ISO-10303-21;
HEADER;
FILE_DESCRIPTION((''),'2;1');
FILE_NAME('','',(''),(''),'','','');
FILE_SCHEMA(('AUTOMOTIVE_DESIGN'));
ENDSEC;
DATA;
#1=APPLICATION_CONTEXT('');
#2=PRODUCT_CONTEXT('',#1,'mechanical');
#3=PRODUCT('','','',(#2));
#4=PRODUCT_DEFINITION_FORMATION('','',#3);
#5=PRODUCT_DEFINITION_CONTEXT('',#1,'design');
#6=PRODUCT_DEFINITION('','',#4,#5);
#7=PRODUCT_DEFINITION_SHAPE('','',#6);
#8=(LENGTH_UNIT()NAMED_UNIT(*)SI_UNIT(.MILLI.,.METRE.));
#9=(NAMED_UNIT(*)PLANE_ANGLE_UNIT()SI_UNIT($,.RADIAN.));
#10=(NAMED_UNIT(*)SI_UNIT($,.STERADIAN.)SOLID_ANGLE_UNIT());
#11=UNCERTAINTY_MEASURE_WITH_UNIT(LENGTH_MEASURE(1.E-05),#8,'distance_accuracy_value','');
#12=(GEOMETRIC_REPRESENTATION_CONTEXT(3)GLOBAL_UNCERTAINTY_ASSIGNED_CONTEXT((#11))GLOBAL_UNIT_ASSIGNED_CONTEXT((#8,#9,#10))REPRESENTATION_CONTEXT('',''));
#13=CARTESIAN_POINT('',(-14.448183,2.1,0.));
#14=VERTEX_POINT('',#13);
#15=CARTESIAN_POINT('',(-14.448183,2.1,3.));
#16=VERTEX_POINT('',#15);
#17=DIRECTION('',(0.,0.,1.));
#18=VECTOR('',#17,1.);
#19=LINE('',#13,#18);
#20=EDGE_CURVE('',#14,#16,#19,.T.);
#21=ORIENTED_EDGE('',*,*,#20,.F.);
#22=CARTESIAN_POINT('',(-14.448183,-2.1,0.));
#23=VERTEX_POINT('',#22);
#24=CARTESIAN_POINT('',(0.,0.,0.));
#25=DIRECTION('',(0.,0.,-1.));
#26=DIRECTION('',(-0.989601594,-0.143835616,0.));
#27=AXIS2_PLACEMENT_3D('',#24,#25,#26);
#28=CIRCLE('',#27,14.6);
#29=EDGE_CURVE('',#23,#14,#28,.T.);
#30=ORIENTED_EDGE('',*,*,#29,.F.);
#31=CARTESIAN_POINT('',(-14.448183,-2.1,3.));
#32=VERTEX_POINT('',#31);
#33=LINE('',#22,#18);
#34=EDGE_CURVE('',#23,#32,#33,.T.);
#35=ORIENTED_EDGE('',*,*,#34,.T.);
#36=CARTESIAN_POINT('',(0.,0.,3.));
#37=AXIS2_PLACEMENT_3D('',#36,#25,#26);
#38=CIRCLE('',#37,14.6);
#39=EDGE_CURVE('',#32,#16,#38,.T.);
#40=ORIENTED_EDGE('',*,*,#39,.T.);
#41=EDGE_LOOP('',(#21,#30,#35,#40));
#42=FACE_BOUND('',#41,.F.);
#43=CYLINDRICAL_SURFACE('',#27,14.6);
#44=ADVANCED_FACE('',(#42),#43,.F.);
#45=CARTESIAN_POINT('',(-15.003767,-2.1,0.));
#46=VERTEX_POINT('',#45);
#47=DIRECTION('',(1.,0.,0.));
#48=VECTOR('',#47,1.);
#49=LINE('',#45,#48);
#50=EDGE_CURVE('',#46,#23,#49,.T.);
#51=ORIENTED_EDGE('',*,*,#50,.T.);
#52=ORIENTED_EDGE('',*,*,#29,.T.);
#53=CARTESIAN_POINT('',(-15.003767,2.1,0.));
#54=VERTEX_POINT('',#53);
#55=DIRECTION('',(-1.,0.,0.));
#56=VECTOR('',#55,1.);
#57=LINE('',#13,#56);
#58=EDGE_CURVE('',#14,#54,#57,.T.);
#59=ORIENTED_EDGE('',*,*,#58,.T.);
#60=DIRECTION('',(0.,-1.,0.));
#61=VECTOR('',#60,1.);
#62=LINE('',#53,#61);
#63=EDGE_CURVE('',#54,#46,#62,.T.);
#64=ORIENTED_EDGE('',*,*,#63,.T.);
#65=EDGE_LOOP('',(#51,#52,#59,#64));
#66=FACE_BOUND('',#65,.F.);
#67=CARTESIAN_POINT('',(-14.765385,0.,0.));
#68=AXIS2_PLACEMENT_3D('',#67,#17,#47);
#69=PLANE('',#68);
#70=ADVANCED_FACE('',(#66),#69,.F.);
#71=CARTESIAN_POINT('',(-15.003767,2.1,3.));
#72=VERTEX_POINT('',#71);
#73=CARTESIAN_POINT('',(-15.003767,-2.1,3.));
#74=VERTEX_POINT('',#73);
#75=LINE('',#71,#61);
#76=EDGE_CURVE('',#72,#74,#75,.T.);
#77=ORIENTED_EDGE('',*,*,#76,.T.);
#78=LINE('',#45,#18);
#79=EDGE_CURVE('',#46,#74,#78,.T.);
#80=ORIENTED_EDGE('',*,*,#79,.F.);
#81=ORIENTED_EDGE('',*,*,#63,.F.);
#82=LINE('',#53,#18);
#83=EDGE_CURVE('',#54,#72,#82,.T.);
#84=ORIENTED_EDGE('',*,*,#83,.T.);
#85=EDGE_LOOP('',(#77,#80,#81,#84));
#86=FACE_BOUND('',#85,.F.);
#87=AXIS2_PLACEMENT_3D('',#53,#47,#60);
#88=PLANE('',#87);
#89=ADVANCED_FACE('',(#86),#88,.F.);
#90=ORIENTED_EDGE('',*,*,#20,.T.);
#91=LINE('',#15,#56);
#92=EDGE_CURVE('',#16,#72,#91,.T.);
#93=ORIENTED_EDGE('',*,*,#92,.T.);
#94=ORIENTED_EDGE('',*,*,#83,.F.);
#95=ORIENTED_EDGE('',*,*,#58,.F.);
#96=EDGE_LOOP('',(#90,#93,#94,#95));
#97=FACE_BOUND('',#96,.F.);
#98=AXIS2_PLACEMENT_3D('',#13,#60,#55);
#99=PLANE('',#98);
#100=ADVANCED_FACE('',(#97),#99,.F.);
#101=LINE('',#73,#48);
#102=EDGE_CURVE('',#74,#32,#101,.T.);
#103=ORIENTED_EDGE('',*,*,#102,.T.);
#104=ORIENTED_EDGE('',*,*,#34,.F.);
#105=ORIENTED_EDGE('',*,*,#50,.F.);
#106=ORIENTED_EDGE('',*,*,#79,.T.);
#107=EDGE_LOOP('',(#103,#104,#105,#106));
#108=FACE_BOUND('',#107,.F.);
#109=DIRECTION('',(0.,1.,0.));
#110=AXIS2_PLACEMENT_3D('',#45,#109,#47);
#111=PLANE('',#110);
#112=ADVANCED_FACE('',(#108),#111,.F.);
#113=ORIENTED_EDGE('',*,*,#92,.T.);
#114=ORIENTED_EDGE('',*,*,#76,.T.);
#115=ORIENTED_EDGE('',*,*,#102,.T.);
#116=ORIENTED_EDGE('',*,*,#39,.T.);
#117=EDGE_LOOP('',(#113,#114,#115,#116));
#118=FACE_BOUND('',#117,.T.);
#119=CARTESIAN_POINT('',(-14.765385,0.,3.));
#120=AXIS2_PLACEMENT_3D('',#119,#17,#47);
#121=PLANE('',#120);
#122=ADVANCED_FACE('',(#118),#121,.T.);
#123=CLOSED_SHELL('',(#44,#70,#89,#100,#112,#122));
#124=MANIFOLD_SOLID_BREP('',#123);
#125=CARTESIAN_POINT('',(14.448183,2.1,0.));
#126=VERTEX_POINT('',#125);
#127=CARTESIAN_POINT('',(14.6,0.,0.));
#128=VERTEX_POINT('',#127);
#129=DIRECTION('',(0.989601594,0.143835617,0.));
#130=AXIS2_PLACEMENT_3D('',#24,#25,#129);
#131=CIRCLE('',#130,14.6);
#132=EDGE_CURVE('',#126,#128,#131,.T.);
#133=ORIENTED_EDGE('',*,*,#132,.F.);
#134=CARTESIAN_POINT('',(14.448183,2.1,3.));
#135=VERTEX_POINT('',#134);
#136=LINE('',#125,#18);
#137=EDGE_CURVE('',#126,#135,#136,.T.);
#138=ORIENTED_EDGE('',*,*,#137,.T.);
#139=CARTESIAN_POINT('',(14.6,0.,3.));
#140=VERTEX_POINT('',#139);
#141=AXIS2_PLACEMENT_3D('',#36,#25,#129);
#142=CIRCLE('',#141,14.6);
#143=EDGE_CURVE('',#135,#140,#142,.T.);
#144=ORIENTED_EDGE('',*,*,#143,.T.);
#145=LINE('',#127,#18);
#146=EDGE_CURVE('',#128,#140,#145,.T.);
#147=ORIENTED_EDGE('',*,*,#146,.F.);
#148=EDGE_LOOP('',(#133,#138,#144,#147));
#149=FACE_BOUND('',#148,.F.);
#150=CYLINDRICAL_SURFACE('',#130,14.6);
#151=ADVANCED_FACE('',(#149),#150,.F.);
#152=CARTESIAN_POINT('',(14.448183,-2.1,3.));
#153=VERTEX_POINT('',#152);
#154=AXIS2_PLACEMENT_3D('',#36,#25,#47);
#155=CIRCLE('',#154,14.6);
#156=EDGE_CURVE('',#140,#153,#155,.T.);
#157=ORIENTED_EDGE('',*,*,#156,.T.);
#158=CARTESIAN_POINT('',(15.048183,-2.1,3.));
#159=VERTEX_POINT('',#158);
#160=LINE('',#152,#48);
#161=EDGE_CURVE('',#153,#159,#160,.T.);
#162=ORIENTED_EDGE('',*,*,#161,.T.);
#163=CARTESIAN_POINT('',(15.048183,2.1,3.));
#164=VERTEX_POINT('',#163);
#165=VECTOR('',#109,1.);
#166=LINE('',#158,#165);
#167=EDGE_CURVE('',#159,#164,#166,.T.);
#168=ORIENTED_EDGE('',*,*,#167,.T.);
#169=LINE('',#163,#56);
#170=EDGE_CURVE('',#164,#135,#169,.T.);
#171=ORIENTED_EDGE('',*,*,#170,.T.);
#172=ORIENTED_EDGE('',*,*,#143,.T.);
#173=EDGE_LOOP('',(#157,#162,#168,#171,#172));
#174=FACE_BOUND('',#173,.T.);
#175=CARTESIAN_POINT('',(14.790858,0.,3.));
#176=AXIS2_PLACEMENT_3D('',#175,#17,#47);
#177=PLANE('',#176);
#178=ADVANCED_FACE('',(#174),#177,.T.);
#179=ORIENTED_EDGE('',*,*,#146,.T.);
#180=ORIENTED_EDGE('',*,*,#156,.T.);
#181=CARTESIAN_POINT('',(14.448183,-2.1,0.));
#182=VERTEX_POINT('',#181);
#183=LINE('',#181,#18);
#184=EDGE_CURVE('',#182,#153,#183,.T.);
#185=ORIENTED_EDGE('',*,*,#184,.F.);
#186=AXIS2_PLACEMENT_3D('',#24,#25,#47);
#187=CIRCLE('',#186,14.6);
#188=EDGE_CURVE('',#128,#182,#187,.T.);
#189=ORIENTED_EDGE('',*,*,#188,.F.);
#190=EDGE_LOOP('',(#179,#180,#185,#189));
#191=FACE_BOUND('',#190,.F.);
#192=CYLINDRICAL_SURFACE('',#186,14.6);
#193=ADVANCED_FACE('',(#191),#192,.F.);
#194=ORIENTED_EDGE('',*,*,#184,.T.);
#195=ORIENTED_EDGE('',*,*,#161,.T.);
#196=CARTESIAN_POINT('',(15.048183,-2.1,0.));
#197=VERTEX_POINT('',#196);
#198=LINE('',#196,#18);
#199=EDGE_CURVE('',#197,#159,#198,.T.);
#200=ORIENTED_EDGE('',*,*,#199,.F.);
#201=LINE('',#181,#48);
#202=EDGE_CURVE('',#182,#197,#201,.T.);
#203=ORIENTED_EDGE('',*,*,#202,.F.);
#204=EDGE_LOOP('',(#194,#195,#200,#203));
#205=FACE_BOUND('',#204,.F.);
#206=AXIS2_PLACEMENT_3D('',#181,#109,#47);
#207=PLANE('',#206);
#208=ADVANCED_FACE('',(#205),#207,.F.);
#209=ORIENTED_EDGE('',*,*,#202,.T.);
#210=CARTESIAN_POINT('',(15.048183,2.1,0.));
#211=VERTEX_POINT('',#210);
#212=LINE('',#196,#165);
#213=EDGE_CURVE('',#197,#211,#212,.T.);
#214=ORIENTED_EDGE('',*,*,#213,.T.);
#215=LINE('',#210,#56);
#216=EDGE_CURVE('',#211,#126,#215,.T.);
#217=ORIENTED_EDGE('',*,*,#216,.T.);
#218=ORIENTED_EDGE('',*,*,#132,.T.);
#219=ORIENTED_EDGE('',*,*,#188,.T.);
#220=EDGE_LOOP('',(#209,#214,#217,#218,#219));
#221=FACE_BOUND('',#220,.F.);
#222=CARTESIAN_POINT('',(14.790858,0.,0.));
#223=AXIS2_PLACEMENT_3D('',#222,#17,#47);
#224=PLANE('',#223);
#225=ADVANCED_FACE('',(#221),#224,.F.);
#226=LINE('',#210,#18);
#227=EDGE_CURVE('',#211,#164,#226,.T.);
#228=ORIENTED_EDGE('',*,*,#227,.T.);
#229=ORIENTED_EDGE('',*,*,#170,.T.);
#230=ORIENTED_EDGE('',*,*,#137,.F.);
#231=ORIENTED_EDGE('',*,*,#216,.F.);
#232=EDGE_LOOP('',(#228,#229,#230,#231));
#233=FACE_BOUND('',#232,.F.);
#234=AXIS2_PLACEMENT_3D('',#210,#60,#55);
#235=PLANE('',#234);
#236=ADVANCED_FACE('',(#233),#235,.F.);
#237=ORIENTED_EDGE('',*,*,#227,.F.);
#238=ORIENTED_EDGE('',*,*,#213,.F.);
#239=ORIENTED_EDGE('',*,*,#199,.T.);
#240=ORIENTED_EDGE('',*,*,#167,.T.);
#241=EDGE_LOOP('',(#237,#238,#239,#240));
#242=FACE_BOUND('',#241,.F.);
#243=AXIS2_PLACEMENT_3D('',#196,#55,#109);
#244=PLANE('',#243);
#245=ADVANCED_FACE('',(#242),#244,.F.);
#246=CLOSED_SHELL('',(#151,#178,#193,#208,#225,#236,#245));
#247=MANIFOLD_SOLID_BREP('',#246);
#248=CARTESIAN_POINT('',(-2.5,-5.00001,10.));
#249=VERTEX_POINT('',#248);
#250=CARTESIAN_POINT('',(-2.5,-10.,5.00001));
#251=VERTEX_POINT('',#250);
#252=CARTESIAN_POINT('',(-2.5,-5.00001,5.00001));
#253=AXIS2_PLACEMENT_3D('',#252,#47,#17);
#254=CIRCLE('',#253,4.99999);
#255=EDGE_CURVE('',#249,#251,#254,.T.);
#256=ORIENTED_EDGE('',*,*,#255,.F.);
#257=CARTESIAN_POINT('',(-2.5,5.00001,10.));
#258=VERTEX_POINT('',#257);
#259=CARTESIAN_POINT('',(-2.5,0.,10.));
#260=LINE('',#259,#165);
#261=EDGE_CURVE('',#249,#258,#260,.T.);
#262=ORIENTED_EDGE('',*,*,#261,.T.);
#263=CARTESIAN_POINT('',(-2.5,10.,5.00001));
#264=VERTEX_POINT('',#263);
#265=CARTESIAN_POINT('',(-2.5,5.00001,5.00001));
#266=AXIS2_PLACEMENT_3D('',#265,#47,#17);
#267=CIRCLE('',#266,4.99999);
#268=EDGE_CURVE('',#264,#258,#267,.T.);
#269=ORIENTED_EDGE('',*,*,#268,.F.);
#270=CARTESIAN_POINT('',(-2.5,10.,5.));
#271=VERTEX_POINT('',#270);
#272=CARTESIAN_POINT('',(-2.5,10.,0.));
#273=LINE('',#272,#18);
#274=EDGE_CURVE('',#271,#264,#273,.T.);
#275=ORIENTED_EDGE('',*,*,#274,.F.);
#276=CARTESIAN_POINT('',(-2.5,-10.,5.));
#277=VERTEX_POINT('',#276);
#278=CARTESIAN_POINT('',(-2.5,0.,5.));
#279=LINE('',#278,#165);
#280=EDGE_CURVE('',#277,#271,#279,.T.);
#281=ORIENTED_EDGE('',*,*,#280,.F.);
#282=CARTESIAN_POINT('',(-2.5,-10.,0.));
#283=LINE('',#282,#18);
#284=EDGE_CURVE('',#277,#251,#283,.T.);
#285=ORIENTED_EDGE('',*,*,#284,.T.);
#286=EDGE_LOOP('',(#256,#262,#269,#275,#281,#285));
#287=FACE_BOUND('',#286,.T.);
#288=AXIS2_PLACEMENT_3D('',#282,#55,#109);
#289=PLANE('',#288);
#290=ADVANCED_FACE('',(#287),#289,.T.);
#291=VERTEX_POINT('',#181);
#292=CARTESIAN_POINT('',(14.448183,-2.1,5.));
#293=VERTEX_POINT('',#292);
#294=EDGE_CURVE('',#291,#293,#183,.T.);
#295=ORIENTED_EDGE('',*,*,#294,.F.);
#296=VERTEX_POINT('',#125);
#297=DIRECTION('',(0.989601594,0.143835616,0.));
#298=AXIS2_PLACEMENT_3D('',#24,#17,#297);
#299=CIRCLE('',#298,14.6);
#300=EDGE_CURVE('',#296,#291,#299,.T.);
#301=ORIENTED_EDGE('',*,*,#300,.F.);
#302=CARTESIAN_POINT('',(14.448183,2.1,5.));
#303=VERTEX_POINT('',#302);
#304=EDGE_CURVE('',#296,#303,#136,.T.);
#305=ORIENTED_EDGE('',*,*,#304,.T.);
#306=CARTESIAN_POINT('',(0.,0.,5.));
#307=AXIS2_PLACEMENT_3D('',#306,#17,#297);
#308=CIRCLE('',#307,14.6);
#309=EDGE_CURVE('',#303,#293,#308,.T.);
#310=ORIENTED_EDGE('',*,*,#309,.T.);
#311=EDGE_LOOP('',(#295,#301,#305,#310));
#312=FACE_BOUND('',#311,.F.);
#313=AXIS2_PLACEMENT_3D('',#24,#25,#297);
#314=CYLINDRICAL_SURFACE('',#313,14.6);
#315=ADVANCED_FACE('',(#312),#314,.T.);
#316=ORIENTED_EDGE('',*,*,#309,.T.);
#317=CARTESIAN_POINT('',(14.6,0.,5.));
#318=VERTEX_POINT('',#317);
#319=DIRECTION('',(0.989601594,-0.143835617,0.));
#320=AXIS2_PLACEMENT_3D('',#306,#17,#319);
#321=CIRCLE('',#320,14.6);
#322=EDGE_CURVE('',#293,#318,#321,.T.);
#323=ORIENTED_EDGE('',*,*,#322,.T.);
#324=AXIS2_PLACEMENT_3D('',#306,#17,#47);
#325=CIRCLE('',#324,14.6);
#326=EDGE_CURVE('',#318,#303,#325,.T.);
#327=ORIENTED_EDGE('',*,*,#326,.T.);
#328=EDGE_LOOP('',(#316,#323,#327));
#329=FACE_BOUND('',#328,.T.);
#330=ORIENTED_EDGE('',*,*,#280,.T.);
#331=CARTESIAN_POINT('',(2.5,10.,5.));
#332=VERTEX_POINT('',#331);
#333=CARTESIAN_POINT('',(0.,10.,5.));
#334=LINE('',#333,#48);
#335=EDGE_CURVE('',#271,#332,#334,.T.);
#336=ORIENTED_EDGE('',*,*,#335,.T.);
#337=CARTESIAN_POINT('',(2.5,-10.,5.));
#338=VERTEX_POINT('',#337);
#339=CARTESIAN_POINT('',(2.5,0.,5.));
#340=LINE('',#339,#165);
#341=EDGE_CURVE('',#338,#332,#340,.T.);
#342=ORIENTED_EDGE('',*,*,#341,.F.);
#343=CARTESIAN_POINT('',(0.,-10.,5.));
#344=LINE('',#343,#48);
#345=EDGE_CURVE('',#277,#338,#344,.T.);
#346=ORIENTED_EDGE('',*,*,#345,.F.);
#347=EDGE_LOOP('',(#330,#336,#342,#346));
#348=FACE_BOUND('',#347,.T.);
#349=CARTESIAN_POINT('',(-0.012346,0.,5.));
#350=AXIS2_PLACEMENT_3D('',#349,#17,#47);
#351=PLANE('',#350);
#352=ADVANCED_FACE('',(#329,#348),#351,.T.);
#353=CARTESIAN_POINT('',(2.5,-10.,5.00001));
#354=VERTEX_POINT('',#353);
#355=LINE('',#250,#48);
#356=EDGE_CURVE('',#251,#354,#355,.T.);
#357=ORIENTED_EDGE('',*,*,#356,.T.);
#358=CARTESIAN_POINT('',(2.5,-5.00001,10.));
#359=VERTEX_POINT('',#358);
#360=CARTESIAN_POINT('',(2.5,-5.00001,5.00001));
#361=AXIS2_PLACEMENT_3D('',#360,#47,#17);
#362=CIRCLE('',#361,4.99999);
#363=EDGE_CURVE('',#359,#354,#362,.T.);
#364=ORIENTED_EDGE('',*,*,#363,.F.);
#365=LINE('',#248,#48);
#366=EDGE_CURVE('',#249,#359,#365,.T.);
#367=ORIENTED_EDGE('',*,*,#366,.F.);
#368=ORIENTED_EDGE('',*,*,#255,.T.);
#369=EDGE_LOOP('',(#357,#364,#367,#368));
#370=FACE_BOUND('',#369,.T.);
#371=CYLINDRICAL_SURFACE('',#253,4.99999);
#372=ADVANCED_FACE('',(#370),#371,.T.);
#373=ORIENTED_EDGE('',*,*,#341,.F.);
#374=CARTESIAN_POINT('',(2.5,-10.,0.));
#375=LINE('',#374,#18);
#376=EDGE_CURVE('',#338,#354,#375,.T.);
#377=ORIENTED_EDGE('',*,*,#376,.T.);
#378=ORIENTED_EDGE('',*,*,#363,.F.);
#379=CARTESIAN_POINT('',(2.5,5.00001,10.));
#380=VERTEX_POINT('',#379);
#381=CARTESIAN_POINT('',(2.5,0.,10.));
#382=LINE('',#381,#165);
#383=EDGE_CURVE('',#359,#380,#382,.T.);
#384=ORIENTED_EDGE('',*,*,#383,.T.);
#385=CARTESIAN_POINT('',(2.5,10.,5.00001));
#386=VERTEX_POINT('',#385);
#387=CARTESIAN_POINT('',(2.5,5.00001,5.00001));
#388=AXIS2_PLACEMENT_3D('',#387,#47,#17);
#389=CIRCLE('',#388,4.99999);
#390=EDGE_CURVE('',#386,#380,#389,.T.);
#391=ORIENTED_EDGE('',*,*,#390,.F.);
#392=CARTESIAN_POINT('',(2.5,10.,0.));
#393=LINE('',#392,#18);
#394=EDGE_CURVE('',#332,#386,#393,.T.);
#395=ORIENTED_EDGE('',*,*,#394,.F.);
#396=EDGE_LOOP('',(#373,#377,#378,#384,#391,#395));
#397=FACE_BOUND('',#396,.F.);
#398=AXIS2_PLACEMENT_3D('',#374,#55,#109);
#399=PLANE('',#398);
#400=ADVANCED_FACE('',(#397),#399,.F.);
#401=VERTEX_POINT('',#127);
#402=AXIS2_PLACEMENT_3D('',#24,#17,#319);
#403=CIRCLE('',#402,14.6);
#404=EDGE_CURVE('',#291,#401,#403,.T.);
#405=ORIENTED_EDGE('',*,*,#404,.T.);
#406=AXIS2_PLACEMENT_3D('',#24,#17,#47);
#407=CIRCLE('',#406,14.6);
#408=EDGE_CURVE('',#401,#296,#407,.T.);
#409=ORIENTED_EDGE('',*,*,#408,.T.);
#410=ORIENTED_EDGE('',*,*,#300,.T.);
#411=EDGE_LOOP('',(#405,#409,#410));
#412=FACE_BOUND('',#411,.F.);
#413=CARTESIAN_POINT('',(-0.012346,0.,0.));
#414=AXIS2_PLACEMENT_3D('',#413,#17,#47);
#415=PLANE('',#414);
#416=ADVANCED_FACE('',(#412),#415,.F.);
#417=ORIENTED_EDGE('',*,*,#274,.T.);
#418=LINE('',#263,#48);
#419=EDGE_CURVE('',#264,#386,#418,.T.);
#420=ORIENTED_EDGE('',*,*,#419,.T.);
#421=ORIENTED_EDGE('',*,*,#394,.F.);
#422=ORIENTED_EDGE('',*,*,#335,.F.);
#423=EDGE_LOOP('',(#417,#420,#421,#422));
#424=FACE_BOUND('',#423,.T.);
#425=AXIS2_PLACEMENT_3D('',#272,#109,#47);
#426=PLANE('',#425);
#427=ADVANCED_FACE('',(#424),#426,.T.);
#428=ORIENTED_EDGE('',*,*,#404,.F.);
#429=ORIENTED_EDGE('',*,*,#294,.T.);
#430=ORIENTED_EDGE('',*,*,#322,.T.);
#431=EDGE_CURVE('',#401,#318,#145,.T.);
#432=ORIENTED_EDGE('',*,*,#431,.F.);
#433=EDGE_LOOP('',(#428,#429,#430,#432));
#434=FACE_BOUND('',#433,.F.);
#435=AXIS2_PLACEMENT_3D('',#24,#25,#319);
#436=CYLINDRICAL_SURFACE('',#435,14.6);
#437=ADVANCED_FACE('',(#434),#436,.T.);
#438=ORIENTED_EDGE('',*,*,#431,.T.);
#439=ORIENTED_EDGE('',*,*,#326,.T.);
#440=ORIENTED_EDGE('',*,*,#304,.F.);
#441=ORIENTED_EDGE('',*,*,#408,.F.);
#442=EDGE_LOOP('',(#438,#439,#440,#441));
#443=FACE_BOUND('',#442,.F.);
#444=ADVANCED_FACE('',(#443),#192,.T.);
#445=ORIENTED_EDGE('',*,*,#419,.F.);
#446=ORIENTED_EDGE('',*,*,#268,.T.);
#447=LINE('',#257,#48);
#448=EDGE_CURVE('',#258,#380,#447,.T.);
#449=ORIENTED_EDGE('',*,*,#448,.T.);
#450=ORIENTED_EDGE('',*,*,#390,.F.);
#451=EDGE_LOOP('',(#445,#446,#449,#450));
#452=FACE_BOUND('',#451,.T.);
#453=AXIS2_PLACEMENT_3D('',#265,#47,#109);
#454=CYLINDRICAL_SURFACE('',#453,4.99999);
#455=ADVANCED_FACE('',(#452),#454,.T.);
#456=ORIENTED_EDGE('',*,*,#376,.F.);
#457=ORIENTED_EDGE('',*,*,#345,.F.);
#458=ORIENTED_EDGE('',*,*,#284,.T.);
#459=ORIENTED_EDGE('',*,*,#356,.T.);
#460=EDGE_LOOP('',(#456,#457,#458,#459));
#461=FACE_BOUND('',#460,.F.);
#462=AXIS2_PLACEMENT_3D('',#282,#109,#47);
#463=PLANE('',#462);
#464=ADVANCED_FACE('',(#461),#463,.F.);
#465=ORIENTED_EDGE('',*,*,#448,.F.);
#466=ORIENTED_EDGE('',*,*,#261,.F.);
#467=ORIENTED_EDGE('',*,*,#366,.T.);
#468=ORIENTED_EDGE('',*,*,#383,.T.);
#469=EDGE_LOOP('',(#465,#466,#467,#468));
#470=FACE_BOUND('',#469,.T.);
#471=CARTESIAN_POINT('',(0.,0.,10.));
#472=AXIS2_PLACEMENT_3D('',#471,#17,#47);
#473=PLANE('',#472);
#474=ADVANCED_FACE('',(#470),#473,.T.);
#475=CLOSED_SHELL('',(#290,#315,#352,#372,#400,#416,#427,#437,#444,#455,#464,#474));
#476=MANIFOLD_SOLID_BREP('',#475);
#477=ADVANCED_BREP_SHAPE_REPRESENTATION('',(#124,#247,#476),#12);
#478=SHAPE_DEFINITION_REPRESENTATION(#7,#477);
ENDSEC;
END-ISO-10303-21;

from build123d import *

# Parameters (mm, degrees)
F0_W     = 5
F0_H     = 20
F1_DEPTH = 5
F2_DEPTH = 3
F3_DEPTH = 10
F4_R     = 4.99999


# Not quite as in the source:
# - a fillet or chamfer is up to 0.001 mm smaller than in the source, because OpenCascade refuses the exact size


with BuildPart() as f1:
    # F0 (on Top) → F1 (new body)
    with BuildSketch(Plane.XY):
        with BuildLine():
            Line((14.4481832768, -2.1), (14.4481832768, 2.1))
            ThreePointArc((14.4481832768, 2.1), (0, 14.6), (-14.4481832768, 2.1))
            Line((-14.4481832768, 2.1), (-14.4037672862, 2.1))
            Line((-14.4037672862, 2.1), (-14.4037672862, -2.1))
            Line((-14.4037672862, -2.1), (-14.4481832768, -2.1))
            ThreePointArc((-14.4481832768, -2.1), (0, -14.6), (14.4481832768, -2.1))
        make_face()
        Rectangle(F0_W, F0_H, mode=Mode.SUBTRACT)
        with BuildLine():
            ThreePointArc((14.4481832768, -2.1), (14.5619963577, -1.0527402716), (14.6, 0))
            ThreePointArc((14.6, 0), (14.5619963577, 1.0527402716), (14.4481832768, 2.1))
            Line((14.4481832768, 2.1), (14.4481832768, -2.1))
        make_face()
        with BuildLine():
            Line((-14.4037672862, 2.1), (-14.4481832768, 2.1))
            ThreePointArc((-14.4481832768, 2.1), (-14.6, 0), (-14.4481832768, -2.1))
            Line((-14.4481832768, -2.1), (-14.4037672862, -2.1))
            Line((-14.4037672862, -2.1), (-14.4037672862, 2.1))
        make_face()
    extrude(amount=F1_DEPTH)

    # F0 (on Top) → F3 (join)
    with BuildSketch(Plane.XY):
        Rectangle(F0_W, F0_H)
    extrude(amount=F3_DEPTH)

    # F4 (radius 5 in the source; OpenCascade refuses exactly that, so slightly less here)
    f4_edges = [f1.edges().sort_by_distance(p)[0] for p in [
        (0, 10, 10),
        (0, -10, 10),
    ]]
    fillet(f4_edges, radius=F4_R)


with BuildPart() as f2:
    # F0 (on Top) → F2 (new body)
    with BuildSketch(Plane.XY):
        with BuildLine():
            ThreePointArc((-14.4481832768, -2.1), (-14.6, 0), (-14.4481832768, 2.1))
            Line((-14.4481832768, 2.1), (-15.0037672862, 2.1))
            Line((-15.0037672862, 2.1), (-15.0037672862, -2.1))
            Line((-15.0037672862, -2.1), (-14.4481832768, -2.1))
        make_face()
    extrude(amount=F2_DEPTH)


with BuildPart() as f2b:
    # F0 (on Top) → F2, piece 2 (new body)
    with BuildSketch(Plane.XY):
        with BuildLine():
            ThreePointArc((14.4481832768, 2.1), (14.5619963577, 1.0527402716), (14.6, 0))
            ThreePointArc((14.6, 0), (14.5619963577, -1.0527402716), (14.4481832768, -2.1))
            Line((14.4481832768, -2.1), (15.0481832768, -2.1))
            Line((15.0481832768, -2.1), (15.0481832768, 2.1))
            Line((15.0481832768, 2.1), (14.4481832768, 2.1))
        make_face()
    extrude(amount=F2_DEPTH)


solid = Compound([f1.part, f2.part, f2b.part])
